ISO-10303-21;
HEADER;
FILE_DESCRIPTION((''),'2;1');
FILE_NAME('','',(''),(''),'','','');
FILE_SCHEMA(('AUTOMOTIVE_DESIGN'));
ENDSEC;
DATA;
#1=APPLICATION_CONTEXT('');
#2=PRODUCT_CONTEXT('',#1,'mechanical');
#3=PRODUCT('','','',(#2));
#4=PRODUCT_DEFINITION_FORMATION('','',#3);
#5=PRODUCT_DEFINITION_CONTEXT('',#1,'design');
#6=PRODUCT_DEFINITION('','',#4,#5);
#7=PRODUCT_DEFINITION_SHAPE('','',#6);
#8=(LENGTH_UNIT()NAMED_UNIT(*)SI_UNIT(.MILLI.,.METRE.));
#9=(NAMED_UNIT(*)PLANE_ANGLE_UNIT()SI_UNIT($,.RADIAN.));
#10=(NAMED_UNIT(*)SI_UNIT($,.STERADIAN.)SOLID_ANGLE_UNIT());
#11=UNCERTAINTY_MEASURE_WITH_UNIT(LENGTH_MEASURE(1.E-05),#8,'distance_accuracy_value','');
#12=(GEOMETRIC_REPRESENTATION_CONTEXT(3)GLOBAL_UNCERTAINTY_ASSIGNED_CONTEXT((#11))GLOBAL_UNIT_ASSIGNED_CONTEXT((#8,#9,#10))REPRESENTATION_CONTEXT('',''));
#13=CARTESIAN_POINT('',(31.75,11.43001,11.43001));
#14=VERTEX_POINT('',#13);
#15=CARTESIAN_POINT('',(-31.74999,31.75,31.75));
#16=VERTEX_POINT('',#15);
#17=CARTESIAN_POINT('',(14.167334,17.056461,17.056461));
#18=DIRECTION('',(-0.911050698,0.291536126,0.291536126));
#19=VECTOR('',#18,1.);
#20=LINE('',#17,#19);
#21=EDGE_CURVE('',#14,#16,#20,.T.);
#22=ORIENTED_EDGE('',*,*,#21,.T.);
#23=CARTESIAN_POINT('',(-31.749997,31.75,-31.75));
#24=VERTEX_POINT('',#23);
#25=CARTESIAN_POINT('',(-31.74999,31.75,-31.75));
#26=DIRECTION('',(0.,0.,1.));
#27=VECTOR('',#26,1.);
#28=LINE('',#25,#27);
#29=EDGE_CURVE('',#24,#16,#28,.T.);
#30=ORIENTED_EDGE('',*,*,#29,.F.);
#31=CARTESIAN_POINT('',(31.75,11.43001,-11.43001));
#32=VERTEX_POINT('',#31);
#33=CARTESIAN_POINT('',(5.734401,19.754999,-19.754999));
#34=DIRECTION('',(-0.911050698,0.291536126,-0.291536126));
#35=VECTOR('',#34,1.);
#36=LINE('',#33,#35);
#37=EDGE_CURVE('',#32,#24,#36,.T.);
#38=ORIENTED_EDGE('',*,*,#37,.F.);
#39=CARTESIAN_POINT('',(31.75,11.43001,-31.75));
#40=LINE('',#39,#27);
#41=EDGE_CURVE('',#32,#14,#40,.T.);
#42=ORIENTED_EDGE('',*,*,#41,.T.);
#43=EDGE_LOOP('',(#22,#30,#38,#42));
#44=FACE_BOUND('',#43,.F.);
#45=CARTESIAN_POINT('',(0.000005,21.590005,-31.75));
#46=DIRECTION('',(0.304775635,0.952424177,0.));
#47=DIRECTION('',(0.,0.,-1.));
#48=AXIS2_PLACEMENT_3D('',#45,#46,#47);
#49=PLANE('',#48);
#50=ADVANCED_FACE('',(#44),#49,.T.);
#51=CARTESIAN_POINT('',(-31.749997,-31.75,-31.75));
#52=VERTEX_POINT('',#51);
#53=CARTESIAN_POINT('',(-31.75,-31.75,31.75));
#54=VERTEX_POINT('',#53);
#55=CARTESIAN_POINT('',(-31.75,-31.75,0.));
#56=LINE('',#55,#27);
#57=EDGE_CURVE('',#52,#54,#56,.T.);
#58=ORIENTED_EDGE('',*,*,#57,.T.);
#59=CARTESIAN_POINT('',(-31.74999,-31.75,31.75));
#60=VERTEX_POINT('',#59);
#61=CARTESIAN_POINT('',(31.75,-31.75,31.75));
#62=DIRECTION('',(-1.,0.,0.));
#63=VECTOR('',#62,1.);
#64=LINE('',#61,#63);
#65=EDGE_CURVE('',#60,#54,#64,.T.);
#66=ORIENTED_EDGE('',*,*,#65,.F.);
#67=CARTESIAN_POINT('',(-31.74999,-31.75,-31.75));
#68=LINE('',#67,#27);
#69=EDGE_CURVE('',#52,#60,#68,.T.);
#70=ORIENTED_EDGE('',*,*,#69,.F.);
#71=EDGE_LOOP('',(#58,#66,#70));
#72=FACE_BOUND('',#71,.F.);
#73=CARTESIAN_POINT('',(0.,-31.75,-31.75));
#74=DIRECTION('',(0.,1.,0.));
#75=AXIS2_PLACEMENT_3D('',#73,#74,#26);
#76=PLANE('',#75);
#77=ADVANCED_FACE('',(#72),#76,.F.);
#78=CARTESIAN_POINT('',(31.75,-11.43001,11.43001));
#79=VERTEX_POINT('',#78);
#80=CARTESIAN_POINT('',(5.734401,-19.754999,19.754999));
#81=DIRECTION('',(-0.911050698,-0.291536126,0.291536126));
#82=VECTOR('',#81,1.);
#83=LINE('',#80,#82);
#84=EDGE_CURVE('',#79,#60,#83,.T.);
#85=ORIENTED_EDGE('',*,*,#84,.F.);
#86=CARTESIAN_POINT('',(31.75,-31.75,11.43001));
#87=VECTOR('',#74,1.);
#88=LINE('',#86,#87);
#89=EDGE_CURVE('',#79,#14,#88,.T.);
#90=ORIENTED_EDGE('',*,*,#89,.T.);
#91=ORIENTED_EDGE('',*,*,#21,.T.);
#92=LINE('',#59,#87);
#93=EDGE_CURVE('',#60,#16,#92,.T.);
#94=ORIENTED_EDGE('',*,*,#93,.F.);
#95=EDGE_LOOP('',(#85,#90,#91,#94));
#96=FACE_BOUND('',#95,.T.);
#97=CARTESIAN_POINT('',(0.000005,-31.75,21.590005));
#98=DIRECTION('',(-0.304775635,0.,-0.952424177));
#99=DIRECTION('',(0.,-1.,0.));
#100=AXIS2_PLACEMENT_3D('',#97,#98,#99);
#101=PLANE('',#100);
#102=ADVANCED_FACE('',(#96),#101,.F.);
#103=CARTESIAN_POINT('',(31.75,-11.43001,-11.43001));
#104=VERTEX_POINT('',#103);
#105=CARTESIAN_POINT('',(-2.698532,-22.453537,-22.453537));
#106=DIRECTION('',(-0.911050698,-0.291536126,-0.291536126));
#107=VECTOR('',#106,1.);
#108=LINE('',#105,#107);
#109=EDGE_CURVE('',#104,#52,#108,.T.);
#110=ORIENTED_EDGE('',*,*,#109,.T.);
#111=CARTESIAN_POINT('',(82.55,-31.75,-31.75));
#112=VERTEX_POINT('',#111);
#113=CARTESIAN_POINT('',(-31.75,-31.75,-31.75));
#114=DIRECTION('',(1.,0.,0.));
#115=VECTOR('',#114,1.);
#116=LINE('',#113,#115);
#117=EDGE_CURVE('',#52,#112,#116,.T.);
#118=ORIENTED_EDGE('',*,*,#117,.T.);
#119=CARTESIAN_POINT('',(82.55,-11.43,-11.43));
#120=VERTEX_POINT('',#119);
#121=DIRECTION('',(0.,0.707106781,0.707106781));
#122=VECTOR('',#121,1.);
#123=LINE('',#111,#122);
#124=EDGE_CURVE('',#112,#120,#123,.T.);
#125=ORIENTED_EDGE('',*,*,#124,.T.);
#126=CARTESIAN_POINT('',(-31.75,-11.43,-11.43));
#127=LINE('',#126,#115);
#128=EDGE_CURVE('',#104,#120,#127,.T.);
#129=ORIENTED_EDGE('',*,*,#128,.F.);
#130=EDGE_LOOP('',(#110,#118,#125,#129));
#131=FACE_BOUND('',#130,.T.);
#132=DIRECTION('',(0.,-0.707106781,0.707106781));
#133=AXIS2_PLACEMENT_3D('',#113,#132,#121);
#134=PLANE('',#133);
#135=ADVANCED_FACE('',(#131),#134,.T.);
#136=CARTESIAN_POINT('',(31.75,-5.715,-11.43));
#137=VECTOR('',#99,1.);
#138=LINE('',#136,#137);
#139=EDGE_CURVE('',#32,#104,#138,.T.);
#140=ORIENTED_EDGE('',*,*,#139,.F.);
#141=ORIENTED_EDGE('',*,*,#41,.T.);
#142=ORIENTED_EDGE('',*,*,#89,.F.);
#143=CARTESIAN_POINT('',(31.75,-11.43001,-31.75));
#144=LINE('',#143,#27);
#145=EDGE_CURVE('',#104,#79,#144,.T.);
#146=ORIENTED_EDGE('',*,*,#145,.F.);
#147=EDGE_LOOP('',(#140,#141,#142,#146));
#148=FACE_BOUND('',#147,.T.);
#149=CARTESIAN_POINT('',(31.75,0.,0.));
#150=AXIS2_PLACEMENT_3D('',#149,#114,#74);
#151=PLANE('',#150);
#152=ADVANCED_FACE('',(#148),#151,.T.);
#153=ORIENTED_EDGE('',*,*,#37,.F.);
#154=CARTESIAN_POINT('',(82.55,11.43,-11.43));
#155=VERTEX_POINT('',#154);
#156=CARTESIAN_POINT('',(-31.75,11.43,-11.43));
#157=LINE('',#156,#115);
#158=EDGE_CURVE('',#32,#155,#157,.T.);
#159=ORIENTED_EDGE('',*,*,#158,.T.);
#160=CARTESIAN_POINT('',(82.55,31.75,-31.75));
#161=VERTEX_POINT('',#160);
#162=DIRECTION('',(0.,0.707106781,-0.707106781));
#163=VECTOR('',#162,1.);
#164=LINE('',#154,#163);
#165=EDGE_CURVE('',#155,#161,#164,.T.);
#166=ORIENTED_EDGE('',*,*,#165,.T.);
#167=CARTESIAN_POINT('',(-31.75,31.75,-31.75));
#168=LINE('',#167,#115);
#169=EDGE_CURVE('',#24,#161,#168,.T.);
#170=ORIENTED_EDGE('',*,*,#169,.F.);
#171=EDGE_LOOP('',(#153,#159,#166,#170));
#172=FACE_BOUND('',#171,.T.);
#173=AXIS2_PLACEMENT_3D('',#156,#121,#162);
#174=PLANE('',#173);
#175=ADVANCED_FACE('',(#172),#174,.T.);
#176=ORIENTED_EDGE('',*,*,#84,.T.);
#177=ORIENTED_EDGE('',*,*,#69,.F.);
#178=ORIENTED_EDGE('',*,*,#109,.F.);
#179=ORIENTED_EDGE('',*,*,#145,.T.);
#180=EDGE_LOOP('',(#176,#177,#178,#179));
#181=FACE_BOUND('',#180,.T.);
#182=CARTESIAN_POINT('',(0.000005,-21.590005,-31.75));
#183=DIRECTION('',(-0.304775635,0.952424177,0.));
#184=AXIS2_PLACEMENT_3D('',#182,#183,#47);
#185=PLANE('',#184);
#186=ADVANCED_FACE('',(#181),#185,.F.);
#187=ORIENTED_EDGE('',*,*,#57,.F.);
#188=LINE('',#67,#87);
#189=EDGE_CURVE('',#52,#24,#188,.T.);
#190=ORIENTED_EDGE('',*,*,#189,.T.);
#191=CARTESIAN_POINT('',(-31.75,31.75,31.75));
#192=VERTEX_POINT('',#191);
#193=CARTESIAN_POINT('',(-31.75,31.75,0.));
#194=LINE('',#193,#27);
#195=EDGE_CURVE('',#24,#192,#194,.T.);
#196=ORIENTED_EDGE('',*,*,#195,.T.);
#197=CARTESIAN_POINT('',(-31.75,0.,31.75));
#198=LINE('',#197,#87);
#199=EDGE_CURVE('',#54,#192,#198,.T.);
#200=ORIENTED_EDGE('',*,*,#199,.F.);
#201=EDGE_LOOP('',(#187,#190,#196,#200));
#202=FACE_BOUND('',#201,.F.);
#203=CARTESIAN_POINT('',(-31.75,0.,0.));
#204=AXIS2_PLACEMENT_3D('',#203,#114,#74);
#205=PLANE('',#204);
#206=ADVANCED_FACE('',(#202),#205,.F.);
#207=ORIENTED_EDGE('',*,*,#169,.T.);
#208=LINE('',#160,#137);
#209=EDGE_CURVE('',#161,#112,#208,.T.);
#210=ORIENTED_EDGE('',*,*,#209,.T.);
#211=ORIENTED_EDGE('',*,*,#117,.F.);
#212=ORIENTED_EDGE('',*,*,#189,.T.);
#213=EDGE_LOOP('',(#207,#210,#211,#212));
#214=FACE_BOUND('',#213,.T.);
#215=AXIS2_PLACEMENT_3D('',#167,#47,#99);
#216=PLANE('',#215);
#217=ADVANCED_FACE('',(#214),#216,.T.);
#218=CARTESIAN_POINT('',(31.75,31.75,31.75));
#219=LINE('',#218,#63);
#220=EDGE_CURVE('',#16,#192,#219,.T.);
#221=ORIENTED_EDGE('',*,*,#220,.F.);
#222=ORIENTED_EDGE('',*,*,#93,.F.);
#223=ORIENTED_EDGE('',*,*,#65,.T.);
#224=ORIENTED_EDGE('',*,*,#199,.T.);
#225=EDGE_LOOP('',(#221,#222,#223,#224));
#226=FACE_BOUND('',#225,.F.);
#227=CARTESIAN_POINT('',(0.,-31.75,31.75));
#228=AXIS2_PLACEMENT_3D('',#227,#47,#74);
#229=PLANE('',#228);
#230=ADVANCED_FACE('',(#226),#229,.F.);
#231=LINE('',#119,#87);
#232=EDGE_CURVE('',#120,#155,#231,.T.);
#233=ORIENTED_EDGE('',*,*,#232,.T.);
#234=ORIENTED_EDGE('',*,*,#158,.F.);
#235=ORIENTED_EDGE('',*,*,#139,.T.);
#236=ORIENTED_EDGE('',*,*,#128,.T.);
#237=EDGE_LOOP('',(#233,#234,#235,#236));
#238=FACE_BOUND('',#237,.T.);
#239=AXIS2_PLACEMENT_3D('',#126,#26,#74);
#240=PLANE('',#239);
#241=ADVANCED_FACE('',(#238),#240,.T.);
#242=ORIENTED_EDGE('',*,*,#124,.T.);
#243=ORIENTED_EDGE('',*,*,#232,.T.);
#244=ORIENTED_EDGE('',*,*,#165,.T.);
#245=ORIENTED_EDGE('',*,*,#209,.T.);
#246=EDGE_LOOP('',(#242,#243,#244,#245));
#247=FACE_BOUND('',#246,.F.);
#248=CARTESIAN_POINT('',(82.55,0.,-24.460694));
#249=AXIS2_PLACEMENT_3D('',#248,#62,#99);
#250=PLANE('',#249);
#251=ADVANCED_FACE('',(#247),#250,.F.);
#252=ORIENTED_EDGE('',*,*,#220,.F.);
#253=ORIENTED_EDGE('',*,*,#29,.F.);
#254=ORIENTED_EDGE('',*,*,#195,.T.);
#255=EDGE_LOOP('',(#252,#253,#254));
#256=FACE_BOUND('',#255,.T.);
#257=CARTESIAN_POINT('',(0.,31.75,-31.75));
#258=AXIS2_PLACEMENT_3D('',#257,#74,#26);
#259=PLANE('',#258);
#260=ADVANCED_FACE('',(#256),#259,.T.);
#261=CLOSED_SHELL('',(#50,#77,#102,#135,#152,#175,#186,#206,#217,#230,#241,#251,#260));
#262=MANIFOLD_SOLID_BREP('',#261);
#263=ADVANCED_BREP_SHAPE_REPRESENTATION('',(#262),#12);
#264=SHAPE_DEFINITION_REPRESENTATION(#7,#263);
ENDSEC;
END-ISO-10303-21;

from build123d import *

# Parameters (mm, degrees)
F0_W     = 63.5
F0_H     = 63.5
F1_DEPTH = 31.75
F2_SIZE2 = 63.49999
F2_SIZE  = 20.31999
F4_DEPTH = 114.3


# Not quite as in the source:
# - a fillet or chamfer is up to 0.001 mm smaller than in the source, because OpenCascade refuses the exact size


with BuildPart() as f1:
    # F0 (on Right) → F1 (new body, symmetric)
    with BuildSketch(Plane.YZ):
        Rectangle(F0_W, F0_H)
    extrude(amount=F1_DEPTH, both=True)

    # F2 (size 20.32 and 63.5 in the source; OpenCascade refuses exactly that, so slightly less here)
    f2_edges = [f1.edges().sort_by_distance(p)[0] for p in [
        (31.75, -31.75, 0),
        (31.75, 0, 31.75),
        (31.75, 31.75, 0),
        (31.75, 0, -31.75),
    ]]
    f2_side = f1.faces().sort_by_distance((31.75, 0, 0))[0]
    chamfer(f2_edges, length=F2_SIZE, length2=F2_SIZE2, reference=f2_side)

    # F3 (on face) → F4 (join)
    with BuildSketch(Plane(origin=(-31.75, 0, 0), x_dir=(0, -1, 0), z_dir=(-1, 0, 0))):
        Polygon((-31.75, -31.75), (31.75, -31.75), (11.43, -11.43), (-11.43, -11.43), align=None)
    extrude(amount=-F4_DEPTH)


solid = f1.part
